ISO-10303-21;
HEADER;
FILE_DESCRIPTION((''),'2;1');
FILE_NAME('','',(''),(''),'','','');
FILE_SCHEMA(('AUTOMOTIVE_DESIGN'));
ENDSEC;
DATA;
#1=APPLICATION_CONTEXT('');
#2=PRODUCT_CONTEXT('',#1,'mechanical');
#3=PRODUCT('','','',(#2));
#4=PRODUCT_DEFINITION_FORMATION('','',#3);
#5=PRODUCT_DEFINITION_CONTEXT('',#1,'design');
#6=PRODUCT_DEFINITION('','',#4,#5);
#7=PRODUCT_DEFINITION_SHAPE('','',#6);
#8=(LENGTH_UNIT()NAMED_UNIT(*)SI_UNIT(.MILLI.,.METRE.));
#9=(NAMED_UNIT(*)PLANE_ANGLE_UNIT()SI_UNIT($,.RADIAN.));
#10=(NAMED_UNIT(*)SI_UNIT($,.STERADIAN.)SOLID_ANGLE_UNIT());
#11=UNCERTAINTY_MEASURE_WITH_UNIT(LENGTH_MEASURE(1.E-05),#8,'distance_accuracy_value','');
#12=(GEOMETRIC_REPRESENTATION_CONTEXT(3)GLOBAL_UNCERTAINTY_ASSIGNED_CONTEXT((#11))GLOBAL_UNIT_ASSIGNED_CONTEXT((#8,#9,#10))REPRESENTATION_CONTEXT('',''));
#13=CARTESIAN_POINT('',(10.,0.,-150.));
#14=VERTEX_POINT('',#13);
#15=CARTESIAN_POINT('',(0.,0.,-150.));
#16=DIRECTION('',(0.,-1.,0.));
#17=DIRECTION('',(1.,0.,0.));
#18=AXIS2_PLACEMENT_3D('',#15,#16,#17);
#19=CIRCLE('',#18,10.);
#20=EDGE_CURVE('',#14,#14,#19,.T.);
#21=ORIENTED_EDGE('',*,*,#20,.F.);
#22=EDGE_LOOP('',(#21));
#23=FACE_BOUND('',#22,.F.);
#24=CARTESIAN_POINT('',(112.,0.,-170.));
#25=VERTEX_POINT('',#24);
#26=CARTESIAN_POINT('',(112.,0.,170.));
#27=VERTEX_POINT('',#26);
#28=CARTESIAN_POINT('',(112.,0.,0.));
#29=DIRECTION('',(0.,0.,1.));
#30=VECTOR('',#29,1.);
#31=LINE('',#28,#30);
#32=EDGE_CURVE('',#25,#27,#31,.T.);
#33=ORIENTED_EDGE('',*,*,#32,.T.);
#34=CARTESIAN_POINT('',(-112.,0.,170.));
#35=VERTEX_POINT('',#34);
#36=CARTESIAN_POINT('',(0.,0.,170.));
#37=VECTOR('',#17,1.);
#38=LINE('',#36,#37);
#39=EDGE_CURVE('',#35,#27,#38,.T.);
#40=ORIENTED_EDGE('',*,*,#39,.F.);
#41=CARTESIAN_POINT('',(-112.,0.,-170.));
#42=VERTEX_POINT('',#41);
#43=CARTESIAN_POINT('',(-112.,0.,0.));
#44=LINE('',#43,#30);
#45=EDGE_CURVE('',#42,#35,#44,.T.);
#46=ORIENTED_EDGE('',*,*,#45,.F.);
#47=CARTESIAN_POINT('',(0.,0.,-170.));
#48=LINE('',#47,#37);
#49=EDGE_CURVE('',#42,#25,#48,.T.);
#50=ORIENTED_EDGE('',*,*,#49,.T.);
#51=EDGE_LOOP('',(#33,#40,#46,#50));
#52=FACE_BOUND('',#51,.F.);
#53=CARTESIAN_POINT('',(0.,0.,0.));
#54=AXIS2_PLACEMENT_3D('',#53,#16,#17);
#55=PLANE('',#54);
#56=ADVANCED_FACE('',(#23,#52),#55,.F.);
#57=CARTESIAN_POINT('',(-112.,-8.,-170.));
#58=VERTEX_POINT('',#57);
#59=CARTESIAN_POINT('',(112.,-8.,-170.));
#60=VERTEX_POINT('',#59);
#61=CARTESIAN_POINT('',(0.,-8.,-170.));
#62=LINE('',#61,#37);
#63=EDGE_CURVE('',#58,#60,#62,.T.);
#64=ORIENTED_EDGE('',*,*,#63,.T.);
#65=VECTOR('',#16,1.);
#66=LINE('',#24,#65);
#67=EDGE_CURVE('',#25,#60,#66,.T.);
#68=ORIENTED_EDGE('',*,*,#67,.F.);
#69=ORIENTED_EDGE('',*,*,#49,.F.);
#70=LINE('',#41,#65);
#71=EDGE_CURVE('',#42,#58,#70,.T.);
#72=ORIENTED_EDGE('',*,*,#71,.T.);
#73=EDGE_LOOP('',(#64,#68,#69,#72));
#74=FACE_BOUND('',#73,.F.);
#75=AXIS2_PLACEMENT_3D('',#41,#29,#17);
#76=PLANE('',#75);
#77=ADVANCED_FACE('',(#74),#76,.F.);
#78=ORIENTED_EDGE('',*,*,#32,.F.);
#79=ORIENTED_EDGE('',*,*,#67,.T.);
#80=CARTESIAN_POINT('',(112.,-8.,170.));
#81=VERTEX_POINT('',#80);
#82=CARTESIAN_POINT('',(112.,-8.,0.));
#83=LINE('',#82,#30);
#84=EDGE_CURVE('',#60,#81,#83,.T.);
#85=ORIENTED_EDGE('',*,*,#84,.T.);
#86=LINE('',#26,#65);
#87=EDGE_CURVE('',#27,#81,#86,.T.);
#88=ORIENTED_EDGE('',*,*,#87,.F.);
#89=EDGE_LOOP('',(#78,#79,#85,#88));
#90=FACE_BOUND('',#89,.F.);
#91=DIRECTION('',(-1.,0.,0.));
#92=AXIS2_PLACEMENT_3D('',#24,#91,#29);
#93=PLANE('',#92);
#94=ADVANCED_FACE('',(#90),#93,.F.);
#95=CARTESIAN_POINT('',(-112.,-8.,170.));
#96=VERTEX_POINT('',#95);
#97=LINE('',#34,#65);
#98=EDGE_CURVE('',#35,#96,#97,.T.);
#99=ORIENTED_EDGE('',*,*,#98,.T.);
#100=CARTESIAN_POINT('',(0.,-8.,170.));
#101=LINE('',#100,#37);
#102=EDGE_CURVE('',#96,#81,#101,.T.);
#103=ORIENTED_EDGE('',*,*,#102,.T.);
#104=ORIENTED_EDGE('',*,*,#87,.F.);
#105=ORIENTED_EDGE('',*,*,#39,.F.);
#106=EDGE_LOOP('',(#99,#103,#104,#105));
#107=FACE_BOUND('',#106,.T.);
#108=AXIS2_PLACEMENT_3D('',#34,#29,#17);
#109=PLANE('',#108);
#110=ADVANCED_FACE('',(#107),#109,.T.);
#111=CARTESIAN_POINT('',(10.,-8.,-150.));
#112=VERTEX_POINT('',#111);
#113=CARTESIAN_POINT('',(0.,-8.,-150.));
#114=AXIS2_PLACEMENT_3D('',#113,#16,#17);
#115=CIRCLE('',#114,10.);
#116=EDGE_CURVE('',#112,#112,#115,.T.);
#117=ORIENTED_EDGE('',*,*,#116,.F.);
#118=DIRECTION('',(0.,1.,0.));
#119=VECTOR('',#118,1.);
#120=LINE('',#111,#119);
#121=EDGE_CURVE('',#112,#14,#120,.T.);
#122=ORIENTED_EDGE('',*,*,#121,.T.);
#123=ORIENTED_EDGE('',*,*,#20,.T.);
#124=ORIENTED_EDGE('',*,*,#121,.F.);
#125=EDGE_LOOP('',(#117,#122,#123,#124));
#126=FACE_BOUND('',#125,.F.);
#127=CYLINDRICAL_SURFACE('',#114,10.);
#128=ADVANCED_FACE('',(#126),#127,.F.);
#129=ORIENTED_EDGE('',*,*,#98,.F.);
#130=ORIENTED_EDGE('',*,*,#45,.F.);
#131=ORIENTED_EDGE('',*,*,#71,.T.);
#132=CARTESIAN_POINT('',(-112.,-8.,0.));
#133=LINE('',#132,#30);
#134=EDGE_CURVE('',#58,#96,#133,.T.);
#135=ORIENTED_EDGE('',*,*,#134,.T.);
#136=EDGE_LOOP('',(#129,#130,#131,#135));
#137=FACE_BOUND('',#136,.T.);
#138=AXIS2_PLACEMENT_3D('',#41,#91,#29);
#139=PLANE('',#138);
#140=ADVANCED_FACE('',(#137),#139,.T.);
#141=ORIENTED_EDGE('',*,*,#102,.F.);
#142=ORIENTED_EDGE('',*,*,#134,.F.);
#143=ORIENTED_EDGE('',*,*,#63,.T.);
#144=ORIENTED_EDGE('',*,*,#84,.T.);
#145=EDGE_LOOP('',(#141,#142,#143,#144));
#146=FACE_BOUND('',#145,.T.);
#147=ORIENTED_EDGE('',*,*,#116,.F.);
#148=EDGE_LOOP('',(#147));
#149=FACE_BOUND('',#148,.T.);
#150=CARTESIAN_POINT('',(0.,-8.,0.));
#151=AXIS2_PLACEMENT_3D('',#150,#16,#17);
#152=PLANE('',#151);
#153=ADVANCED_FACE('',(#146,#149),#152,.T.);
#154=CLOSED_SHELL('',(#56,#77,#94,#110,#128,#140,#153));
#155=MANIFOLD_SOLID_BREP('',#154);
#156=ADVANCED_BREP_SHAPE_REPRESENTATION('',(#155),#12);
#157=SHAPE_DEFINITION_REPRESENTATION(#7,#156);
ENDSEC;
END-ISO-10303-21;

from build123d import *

# Parameters (mm, degrees)
F0_W     = 224
F0_H     = 340
F1_DEPTH = 8
F2_R     = 10
F3_DEPTH = 8


# Not quite as in the source:
# - a feature names something its author has since deleted; it is built from what else it names


with BuildPart() as f1:
    # F0 (on Front) → F1 (new body)
    with BuildSketch(Plane.XZ):
        Rectangle(F0_W, F0_H)
    extrude(amount=F1_DEPTH)

    # F2 (on face) → F3 (cut, through all)
    with BuildSketch(Plane.XZ.offset(8)):
        with Locations((0, -150)):
            Circle(F2_R)
    extrude(amount=-F3_DEPTH, mode=Mode.SUBTRACT)


solid = f1.part
